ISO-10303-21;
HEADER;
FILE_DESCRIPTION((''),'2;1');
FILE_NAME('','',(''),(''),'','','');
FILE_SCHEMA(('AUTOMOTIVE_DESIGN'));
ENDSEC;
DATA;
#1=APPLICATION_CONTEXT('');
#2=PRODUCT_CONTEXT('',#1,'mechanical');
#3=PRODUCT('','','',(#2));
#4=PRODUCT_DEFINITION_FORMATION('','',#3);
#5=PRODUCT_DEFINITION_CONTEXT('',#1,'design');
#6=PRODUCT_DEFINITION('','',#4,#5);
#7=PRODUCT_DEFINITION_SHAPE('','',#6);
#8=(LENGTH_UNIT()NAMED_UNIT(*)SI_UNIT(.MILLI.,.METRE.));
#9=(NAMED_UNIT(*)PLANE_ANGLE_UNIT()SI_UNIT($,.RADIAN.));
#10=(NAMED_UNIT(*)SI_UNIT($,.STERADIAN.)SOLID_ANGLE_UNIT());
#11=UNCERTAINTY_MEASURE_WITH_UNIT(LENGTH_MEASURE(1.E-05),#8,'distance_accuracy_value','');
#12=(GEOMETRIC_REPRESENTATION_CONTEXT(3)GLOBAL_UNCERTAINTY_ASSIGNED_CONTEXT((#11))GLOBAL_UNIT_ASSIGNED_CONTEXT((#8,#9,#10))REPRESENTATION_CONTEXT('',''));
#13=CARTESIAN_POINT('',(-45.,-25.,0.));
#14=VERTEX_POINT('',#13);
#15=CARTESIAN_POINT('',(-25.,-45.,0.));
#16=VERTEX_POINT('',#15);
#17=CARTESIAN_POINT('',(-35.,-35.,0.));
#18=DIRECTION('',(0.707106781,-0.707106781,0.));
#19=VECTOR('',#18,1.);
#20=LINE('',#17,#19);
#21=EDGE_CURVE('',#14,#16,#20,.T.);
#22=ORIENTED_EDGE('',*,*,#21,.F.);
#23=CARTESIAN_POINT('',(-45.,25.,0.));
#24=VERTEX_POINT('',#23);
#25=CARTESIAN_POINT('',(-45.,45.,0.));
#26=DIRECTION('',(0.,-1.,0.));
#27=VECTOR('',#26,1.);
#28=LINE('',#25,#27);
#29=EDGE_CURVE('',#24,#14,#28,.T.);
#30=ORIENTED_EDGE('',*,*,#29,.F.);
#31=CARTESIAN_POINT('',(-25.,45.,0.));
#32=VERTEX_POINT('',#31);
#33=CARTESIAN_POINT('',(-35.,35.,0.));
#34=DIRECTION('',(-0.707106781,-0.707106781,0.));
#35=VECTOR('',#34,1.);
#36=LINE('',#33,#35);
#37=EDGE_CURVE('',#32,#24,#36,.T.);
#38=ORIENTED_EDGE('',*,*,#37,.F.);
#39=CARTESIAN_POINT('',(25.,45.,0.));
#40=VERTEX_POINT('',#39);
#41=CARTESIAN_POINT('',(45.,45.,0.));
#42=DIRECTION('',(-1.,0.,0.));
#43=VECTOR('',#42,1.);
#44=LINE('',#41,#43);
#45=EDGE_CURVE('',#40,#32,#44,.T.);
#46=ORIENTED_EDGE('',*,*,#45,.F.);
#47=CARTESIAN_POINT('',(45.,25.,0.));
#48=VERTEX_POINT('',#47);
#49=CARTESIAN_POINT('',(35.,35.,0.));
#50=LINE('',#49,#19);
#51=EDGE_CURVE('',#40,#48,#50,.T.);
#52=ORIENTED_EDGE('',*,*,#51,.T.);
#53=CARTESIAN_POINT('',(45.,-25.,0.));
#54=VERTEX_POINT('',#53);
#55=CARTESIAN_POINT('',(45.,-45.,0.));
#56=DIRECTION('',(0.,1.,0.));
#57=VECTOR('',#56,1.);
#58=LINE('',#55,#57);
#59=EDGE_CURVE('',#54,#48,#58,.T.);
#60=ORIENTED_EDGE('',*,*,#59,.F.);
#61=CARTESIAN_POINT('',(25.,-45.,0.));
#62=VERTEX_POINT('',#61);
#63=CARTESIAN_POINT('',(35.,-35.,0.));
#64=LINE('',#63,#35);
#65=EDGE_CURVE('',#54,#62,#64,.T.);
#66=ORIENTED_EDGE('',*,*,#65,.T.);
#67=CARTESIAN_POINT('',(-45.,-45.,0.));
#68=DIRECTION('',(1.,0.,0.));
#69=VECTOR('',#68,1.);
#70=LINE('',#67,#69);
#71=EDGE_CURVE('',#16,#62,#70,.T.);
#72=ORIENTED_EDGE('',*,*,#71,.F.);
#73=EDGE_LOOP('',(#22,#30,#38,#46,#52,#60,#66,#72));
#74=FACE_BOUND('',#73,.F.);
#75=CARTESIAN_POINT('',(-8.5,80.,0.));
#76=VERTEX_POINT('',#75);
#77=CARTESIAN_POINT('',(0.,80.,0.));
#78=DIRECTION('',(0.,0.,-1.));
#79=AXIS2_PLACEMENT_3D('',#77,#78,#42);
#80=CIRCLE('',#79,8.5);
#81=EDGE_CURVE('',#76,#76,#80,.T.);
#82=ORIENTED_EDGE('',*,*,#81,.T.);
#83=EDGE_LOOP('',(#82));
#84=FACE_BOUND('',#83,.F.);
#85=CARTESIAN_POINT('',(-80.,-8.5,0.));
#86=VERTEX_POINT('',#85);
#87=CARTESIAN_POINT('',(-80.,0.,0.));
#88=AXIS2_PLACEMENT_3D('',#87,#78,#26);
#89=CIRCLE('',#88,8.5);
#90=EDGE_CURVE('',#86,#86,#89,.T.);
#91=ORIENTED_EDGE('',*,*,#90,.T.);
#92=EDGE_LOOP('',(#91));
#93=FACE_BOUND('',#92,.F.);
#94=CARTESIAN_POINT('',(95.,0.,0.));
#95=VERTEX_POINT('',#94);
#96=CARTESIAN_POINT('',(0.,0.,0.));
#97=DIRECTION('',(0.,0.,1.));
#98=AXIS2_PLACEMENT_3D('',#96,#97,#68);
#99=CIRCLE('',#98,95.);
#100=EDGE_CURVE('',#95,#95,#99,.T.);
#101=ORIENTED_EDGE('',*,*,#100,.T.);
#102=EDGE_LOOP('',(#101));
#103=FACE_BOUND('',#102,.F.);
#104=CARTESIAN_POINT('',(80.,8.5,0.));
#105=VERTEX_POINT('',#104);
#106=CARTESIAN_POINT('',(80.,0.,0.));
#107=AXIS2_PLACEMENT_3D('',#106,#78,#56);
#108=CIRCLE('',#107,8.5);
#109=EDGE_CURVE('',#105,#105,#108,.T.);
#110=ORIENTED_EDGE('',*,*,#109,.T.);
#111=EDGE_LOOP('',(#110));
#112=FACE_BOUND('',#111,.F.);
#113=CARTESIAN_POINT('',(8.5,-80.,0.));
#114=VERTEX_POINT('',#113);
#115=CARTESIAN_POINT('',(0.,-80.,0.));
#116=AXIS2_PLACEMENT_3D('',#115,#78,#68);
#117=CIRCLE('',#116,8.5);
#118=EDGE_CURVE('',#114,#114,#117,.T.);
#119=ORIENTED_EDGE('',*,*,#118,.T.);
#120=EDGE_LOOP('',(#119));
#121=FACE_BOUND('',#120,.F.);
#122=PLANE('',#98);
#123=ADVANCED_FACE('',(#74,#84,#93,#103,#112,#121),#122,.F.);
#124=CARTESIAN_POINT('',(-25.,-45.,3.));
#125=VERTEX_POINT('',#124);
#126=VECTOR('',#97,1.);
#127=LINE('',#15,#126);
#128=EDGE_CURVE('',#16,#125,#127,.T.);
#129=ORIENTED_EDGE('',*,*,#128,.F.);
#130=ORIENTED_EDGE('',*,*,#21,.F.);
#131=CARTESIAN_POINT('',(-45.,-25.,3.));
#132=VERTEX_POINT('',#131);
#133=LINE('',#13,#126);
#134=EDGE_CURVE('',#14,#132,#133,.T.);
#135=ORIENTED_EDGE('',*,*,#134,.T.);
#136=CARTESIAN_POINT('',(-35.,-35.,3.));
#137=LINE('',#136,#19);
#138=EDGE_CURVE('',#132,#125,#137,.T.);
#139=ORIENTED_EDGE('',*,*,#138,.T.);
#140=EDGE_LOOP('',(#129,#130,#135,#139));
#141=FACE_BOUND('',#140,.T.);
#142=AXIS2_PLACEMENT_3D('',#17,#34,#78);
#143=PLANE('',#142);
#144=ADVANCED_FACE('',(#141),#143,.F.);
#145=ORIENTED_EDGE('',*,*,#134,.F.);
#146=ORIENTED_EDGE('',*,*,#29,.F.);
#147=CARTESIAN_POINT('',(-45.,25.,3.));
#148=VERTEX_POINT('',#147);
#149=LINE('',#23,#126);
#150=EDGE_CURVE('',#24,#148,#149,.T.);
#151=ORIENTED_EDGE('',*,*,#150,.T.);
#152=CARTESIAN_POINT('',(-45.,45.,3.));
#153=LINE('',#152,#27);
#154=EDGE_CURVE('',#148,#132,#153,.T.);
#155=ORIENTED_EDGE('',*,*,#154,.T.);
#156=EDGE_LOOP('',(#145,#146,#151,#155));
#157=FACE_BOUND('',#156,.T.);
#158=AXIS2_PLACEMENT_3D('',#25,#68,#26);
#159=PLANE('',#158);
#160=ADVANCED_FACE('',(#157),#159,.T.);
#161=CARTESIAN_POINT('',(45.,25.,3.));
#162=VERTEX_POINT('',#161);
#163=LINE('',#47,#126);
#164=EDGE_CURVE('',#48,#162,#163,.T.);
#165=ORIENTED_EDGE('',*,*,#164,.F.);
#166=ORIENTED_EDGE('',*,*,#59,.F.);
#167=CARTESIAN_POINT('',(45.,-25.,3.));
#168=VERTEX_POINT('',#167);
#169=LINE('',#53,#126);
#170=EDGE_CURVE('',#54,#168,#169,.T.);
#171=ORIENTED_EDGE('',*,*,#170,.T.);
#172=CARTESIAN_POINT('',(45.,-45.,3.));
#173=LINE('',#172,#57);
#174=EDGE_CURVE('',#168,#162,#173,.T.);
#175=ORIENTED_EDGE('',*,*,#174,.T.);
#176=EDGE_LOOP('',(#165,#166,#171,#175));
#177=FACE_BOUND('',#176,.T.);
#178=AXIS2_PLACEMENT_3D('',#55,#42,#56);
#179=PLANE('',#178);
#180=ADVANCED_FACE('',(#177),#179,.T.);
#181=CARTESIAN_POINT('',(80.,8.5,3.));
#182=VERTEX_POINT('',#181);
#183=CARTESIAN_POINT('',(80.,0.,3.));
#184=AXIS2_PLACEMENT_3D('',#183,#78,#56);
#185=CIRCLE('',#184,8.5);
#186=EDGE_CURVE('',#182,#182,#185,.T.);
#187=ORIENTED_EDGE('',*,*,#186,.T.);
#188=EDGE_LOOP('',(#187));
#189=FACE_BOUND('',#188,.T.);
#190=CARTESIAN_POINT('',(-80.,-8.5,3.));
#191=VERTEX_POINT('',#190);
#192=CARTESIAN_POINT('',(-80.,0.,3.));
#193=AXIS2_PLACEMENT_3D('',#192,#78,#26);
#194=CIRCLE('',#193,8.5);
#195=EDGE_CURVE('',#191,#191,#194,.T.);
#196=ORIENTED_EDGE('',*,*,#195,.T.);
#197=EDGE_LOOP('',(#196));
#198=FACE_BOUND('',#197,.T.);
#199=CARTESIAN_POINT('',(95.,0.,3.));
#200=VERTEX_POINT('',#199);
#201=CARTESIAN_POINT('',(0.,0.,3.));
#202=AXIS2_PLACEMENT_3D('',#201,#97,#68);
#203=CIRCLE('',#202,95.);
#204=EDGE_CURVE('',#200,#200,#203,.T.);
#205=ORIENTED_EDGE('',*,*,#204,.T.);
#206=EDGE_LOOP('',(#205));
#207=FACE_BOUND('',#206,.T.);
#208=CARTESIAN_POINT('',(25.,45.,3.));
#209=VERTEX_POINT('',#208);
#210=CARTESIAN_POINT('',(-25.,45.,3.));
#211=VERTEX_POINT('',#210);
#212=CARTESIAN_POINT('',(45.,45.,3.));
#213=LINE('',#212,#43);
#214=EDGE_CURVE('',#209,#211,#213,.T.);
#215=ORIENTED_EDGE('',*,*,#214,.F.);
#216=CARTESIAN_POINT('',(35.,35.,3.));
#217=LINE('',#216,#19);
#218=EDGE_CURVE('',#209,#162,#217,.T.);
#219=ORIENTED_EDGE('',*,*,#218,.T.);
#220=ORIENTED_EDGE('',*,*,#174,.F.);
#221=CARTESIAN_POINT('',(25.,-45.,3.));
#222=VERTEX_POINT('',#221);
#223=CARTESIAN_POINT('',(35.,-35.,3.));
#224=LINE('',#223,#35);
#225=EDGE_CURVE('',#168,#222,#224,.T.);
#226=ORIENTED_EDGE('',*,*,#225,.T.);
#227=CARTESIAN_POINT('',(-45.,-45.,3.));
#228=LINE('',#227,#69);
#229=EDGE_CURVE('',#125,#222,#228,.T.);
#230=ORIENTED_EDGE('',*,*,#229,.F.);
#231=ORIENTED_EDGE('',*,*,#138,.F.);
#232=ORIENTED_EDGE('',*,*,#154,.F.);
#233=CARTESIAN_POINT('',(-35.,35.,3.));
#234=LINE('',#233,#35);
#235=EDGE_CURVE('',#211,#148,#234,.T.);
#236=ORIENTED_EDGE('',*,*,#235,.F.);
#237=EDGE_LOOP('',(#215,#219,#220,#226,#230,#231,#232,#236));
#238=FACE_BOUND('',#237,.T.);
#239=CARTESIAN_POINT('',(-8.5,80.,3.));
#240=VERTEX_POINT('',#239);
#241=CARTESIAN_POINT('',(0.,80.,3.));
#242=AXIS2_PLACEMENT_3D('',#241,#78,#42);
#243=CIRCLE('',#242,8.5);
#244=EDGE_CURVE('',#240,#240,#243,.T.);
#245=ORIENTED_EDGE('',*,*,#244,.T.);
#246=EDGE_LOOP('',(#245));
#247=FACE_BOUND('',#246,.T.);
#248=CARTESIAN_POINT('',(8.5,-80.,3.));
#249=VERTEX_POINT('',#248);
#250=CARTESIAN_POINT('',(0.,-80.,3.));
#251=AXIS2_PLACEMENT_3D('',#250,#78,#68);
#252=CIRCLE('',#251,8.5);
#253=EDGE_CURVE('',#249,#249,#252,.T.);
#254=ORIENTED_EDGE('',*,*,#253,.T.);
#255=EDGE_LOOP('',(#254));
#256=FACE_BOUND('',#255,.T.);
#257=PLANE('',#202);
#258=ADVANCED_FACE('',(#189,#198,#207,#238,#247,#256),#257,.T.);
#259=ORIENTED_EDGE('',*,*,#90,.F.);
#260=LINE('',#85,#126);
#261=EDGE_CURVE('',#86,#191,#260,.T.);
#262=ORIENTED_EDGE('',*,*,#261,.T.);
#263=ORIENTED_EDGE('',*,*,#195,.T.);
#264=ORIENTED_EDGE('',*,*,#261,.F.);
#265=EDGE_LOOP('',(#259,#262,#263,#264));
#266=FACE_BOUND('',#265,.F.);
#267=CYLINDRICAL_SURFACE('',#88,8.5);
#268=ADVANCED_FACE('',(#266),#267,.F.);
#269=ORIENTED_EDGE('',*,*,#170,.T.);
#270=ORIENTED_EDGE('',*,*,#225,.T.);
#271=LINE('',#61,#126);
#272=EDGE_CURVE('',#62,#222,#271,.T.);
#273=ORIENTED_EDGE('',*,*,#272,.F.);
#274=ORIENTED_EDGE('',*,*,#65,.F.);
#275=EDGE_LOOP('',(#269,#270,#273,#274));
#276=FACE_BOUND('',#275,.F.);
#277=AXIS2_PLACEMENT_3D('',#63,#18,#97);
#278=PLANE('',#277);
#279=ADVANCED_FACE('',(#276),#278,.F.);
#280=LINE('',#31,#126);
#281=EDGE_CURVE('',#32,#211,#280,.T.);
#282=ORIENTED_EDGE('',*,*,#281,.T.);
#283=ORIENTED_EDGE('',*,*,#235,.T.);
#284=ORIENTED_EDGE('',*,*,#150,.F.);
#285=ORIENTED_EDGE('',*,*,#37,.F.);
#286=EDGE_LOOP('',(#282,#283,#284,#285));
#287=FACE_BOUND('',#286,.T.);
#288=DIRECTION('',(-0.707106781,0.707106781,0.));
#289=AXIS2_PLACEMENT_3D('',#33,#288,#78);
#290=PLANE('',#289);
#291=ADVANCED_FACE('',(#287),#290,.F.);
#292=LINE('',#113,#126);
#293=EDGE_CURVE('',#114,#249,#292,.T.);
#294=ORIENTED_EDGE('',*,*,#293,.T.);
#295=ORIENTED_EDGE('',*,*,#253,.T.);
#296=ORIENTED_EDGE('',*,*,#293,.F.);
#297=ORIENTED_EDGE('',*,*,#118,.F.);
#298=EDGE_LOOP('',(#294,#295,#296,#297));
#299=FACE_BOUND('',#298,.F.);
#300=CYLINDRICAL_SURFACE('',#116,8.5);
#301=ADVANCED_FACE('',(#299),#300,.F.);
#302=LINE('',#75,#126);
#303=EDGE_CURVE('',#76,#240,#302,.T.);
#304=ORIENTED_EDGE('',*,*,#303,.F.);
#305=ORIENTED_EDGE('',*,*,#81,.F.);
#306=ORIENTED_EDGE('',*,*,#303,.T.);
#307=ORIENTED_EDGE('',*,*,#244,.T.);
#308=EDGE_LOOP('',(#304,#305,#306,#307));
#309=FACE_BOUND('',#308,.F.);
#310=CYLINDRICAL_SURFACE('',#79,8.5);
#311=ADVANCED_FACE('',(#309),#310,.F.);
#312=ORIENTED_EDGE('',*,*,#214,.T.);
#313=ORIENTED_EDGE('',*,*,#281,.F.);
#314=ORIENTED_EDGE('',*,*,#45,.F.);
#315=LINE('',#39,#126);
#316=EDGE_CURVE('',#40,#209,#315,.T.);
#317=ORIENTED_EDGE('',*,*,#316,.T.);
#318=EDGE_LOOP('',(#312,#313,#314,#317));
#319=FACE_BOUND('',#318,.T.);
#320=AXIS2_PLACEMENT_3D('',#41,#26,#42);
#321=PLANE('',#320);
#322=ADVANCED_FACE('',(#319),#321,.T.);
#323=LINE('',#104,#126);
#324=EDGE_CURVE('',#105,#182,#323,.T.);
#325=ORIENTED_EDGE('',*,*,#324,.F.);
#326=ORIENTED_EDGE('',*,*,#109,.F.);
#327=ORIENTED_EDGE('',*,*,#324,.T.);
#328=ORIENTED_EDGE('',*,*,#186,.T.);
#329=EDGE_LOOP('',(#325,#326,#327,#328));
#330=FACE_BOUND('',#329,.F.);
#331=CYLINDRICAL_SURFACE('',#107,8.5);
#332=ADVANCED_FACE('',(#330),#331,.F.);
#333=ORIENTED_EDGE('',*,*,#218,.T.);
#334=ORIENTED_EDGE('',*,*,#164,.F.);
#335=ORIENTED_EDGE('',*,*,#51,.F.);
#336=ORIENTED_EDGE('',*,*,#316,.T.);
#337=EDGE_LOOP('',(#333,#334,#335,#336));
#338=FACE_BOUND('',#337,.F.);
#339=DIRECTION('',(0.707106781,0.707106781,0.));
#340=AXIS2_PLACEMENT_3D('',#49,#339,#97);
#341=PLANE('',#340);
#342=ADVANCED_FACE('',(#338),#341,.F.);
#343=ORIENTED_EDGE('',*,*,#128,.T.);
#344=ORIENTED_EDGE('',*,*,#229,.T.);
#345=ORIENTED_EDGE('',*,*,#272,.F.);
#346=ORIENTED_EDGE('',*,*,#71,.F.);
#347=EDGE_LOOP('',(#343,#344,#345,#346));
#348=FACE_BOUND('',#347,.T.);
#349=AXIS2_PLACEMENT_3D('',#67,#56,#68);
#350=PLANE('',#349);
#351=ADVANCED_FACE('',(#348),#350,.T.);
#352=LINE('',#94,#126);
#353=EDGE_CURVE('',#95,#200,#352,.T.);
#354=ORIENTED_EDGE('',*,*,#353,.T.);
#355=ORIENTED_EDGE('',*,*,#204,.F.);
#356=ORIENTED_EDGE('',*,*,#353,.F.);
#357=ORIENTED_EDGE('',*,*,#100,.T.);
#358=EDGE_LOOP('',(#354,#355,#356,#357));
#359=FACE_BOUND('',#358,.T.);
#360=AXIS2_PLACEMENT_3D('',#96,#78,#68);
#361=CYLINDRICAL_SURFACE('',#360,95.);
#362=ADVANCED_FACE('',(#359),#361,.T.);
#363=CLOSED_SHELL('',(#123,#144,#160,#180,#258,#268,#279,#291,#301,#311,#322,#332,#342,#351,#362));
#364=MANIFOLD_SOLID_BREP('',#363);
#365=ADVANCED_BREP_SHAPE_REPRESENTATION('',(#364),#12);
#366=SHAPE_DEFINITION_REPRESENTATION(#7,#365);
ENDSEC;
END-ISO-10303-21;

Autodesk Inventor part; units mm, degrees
ref_plane "YZ Plane" through (0, 0, 0) normal (1, 0, 0) x (0, 1, 0)
ref_plane "XZ Plane" through (0, 0, 0) normal (0, 1, 0) x (-1, 0, 0)
ref_plane "XY Plane" through (0, 0, 0) normal (0, 0, 1) x (1, 0, 0)
sketch "Sketch1" plane through (0, 0, 0) normal (0, 0, 1) x (1, 0, 0)
  circle A0 centre (0, 0) radius 95
  line L0 (45, 45) -> (-45, 45)
  line L1 (-45, 45) -> (-45, -45)
  line L2 (-45, -45) -> (45, -45)
  line L3 (45, -45) -> (45, 45)
  line L4 (45, 45) -> (-45, -45) construction
  line L5 (-45, 45) -> (45, -45) construction
  dimension "d157" = 190
  dimension "d158" = 90
  dimension "d159" = 90
extrude "Plate5" add sketch "Sketch1" along normal blind 3
sketch "Sketch7" plane through (0, 0, 0) normal (0, 0, -1) x (-1, 0, 0)
  circle A0 centre (0, 80) radius 8.5
  point P0 (0, 0)
  dimension "d160" = 17
  dimension "d161" = 80
extrude "Cut1" cut sketch "Sketch7" against normal blind 3
pattern_circular "Circular Pattern1" count 4 over 360 about axis through (0, 0, -10) along (0, 0, 1) of "Cut1"
chamfer "Corner Chamfer2" distance 20 angle 45 4 edges at (-45, -45, 1.5) (45, -45, 1.5) (-45, 45, 1.5) (45, 45, 1.5)
properties part number "PNS 754 FDS 1200 FLANGE_1600" material "Stainless Steel"
